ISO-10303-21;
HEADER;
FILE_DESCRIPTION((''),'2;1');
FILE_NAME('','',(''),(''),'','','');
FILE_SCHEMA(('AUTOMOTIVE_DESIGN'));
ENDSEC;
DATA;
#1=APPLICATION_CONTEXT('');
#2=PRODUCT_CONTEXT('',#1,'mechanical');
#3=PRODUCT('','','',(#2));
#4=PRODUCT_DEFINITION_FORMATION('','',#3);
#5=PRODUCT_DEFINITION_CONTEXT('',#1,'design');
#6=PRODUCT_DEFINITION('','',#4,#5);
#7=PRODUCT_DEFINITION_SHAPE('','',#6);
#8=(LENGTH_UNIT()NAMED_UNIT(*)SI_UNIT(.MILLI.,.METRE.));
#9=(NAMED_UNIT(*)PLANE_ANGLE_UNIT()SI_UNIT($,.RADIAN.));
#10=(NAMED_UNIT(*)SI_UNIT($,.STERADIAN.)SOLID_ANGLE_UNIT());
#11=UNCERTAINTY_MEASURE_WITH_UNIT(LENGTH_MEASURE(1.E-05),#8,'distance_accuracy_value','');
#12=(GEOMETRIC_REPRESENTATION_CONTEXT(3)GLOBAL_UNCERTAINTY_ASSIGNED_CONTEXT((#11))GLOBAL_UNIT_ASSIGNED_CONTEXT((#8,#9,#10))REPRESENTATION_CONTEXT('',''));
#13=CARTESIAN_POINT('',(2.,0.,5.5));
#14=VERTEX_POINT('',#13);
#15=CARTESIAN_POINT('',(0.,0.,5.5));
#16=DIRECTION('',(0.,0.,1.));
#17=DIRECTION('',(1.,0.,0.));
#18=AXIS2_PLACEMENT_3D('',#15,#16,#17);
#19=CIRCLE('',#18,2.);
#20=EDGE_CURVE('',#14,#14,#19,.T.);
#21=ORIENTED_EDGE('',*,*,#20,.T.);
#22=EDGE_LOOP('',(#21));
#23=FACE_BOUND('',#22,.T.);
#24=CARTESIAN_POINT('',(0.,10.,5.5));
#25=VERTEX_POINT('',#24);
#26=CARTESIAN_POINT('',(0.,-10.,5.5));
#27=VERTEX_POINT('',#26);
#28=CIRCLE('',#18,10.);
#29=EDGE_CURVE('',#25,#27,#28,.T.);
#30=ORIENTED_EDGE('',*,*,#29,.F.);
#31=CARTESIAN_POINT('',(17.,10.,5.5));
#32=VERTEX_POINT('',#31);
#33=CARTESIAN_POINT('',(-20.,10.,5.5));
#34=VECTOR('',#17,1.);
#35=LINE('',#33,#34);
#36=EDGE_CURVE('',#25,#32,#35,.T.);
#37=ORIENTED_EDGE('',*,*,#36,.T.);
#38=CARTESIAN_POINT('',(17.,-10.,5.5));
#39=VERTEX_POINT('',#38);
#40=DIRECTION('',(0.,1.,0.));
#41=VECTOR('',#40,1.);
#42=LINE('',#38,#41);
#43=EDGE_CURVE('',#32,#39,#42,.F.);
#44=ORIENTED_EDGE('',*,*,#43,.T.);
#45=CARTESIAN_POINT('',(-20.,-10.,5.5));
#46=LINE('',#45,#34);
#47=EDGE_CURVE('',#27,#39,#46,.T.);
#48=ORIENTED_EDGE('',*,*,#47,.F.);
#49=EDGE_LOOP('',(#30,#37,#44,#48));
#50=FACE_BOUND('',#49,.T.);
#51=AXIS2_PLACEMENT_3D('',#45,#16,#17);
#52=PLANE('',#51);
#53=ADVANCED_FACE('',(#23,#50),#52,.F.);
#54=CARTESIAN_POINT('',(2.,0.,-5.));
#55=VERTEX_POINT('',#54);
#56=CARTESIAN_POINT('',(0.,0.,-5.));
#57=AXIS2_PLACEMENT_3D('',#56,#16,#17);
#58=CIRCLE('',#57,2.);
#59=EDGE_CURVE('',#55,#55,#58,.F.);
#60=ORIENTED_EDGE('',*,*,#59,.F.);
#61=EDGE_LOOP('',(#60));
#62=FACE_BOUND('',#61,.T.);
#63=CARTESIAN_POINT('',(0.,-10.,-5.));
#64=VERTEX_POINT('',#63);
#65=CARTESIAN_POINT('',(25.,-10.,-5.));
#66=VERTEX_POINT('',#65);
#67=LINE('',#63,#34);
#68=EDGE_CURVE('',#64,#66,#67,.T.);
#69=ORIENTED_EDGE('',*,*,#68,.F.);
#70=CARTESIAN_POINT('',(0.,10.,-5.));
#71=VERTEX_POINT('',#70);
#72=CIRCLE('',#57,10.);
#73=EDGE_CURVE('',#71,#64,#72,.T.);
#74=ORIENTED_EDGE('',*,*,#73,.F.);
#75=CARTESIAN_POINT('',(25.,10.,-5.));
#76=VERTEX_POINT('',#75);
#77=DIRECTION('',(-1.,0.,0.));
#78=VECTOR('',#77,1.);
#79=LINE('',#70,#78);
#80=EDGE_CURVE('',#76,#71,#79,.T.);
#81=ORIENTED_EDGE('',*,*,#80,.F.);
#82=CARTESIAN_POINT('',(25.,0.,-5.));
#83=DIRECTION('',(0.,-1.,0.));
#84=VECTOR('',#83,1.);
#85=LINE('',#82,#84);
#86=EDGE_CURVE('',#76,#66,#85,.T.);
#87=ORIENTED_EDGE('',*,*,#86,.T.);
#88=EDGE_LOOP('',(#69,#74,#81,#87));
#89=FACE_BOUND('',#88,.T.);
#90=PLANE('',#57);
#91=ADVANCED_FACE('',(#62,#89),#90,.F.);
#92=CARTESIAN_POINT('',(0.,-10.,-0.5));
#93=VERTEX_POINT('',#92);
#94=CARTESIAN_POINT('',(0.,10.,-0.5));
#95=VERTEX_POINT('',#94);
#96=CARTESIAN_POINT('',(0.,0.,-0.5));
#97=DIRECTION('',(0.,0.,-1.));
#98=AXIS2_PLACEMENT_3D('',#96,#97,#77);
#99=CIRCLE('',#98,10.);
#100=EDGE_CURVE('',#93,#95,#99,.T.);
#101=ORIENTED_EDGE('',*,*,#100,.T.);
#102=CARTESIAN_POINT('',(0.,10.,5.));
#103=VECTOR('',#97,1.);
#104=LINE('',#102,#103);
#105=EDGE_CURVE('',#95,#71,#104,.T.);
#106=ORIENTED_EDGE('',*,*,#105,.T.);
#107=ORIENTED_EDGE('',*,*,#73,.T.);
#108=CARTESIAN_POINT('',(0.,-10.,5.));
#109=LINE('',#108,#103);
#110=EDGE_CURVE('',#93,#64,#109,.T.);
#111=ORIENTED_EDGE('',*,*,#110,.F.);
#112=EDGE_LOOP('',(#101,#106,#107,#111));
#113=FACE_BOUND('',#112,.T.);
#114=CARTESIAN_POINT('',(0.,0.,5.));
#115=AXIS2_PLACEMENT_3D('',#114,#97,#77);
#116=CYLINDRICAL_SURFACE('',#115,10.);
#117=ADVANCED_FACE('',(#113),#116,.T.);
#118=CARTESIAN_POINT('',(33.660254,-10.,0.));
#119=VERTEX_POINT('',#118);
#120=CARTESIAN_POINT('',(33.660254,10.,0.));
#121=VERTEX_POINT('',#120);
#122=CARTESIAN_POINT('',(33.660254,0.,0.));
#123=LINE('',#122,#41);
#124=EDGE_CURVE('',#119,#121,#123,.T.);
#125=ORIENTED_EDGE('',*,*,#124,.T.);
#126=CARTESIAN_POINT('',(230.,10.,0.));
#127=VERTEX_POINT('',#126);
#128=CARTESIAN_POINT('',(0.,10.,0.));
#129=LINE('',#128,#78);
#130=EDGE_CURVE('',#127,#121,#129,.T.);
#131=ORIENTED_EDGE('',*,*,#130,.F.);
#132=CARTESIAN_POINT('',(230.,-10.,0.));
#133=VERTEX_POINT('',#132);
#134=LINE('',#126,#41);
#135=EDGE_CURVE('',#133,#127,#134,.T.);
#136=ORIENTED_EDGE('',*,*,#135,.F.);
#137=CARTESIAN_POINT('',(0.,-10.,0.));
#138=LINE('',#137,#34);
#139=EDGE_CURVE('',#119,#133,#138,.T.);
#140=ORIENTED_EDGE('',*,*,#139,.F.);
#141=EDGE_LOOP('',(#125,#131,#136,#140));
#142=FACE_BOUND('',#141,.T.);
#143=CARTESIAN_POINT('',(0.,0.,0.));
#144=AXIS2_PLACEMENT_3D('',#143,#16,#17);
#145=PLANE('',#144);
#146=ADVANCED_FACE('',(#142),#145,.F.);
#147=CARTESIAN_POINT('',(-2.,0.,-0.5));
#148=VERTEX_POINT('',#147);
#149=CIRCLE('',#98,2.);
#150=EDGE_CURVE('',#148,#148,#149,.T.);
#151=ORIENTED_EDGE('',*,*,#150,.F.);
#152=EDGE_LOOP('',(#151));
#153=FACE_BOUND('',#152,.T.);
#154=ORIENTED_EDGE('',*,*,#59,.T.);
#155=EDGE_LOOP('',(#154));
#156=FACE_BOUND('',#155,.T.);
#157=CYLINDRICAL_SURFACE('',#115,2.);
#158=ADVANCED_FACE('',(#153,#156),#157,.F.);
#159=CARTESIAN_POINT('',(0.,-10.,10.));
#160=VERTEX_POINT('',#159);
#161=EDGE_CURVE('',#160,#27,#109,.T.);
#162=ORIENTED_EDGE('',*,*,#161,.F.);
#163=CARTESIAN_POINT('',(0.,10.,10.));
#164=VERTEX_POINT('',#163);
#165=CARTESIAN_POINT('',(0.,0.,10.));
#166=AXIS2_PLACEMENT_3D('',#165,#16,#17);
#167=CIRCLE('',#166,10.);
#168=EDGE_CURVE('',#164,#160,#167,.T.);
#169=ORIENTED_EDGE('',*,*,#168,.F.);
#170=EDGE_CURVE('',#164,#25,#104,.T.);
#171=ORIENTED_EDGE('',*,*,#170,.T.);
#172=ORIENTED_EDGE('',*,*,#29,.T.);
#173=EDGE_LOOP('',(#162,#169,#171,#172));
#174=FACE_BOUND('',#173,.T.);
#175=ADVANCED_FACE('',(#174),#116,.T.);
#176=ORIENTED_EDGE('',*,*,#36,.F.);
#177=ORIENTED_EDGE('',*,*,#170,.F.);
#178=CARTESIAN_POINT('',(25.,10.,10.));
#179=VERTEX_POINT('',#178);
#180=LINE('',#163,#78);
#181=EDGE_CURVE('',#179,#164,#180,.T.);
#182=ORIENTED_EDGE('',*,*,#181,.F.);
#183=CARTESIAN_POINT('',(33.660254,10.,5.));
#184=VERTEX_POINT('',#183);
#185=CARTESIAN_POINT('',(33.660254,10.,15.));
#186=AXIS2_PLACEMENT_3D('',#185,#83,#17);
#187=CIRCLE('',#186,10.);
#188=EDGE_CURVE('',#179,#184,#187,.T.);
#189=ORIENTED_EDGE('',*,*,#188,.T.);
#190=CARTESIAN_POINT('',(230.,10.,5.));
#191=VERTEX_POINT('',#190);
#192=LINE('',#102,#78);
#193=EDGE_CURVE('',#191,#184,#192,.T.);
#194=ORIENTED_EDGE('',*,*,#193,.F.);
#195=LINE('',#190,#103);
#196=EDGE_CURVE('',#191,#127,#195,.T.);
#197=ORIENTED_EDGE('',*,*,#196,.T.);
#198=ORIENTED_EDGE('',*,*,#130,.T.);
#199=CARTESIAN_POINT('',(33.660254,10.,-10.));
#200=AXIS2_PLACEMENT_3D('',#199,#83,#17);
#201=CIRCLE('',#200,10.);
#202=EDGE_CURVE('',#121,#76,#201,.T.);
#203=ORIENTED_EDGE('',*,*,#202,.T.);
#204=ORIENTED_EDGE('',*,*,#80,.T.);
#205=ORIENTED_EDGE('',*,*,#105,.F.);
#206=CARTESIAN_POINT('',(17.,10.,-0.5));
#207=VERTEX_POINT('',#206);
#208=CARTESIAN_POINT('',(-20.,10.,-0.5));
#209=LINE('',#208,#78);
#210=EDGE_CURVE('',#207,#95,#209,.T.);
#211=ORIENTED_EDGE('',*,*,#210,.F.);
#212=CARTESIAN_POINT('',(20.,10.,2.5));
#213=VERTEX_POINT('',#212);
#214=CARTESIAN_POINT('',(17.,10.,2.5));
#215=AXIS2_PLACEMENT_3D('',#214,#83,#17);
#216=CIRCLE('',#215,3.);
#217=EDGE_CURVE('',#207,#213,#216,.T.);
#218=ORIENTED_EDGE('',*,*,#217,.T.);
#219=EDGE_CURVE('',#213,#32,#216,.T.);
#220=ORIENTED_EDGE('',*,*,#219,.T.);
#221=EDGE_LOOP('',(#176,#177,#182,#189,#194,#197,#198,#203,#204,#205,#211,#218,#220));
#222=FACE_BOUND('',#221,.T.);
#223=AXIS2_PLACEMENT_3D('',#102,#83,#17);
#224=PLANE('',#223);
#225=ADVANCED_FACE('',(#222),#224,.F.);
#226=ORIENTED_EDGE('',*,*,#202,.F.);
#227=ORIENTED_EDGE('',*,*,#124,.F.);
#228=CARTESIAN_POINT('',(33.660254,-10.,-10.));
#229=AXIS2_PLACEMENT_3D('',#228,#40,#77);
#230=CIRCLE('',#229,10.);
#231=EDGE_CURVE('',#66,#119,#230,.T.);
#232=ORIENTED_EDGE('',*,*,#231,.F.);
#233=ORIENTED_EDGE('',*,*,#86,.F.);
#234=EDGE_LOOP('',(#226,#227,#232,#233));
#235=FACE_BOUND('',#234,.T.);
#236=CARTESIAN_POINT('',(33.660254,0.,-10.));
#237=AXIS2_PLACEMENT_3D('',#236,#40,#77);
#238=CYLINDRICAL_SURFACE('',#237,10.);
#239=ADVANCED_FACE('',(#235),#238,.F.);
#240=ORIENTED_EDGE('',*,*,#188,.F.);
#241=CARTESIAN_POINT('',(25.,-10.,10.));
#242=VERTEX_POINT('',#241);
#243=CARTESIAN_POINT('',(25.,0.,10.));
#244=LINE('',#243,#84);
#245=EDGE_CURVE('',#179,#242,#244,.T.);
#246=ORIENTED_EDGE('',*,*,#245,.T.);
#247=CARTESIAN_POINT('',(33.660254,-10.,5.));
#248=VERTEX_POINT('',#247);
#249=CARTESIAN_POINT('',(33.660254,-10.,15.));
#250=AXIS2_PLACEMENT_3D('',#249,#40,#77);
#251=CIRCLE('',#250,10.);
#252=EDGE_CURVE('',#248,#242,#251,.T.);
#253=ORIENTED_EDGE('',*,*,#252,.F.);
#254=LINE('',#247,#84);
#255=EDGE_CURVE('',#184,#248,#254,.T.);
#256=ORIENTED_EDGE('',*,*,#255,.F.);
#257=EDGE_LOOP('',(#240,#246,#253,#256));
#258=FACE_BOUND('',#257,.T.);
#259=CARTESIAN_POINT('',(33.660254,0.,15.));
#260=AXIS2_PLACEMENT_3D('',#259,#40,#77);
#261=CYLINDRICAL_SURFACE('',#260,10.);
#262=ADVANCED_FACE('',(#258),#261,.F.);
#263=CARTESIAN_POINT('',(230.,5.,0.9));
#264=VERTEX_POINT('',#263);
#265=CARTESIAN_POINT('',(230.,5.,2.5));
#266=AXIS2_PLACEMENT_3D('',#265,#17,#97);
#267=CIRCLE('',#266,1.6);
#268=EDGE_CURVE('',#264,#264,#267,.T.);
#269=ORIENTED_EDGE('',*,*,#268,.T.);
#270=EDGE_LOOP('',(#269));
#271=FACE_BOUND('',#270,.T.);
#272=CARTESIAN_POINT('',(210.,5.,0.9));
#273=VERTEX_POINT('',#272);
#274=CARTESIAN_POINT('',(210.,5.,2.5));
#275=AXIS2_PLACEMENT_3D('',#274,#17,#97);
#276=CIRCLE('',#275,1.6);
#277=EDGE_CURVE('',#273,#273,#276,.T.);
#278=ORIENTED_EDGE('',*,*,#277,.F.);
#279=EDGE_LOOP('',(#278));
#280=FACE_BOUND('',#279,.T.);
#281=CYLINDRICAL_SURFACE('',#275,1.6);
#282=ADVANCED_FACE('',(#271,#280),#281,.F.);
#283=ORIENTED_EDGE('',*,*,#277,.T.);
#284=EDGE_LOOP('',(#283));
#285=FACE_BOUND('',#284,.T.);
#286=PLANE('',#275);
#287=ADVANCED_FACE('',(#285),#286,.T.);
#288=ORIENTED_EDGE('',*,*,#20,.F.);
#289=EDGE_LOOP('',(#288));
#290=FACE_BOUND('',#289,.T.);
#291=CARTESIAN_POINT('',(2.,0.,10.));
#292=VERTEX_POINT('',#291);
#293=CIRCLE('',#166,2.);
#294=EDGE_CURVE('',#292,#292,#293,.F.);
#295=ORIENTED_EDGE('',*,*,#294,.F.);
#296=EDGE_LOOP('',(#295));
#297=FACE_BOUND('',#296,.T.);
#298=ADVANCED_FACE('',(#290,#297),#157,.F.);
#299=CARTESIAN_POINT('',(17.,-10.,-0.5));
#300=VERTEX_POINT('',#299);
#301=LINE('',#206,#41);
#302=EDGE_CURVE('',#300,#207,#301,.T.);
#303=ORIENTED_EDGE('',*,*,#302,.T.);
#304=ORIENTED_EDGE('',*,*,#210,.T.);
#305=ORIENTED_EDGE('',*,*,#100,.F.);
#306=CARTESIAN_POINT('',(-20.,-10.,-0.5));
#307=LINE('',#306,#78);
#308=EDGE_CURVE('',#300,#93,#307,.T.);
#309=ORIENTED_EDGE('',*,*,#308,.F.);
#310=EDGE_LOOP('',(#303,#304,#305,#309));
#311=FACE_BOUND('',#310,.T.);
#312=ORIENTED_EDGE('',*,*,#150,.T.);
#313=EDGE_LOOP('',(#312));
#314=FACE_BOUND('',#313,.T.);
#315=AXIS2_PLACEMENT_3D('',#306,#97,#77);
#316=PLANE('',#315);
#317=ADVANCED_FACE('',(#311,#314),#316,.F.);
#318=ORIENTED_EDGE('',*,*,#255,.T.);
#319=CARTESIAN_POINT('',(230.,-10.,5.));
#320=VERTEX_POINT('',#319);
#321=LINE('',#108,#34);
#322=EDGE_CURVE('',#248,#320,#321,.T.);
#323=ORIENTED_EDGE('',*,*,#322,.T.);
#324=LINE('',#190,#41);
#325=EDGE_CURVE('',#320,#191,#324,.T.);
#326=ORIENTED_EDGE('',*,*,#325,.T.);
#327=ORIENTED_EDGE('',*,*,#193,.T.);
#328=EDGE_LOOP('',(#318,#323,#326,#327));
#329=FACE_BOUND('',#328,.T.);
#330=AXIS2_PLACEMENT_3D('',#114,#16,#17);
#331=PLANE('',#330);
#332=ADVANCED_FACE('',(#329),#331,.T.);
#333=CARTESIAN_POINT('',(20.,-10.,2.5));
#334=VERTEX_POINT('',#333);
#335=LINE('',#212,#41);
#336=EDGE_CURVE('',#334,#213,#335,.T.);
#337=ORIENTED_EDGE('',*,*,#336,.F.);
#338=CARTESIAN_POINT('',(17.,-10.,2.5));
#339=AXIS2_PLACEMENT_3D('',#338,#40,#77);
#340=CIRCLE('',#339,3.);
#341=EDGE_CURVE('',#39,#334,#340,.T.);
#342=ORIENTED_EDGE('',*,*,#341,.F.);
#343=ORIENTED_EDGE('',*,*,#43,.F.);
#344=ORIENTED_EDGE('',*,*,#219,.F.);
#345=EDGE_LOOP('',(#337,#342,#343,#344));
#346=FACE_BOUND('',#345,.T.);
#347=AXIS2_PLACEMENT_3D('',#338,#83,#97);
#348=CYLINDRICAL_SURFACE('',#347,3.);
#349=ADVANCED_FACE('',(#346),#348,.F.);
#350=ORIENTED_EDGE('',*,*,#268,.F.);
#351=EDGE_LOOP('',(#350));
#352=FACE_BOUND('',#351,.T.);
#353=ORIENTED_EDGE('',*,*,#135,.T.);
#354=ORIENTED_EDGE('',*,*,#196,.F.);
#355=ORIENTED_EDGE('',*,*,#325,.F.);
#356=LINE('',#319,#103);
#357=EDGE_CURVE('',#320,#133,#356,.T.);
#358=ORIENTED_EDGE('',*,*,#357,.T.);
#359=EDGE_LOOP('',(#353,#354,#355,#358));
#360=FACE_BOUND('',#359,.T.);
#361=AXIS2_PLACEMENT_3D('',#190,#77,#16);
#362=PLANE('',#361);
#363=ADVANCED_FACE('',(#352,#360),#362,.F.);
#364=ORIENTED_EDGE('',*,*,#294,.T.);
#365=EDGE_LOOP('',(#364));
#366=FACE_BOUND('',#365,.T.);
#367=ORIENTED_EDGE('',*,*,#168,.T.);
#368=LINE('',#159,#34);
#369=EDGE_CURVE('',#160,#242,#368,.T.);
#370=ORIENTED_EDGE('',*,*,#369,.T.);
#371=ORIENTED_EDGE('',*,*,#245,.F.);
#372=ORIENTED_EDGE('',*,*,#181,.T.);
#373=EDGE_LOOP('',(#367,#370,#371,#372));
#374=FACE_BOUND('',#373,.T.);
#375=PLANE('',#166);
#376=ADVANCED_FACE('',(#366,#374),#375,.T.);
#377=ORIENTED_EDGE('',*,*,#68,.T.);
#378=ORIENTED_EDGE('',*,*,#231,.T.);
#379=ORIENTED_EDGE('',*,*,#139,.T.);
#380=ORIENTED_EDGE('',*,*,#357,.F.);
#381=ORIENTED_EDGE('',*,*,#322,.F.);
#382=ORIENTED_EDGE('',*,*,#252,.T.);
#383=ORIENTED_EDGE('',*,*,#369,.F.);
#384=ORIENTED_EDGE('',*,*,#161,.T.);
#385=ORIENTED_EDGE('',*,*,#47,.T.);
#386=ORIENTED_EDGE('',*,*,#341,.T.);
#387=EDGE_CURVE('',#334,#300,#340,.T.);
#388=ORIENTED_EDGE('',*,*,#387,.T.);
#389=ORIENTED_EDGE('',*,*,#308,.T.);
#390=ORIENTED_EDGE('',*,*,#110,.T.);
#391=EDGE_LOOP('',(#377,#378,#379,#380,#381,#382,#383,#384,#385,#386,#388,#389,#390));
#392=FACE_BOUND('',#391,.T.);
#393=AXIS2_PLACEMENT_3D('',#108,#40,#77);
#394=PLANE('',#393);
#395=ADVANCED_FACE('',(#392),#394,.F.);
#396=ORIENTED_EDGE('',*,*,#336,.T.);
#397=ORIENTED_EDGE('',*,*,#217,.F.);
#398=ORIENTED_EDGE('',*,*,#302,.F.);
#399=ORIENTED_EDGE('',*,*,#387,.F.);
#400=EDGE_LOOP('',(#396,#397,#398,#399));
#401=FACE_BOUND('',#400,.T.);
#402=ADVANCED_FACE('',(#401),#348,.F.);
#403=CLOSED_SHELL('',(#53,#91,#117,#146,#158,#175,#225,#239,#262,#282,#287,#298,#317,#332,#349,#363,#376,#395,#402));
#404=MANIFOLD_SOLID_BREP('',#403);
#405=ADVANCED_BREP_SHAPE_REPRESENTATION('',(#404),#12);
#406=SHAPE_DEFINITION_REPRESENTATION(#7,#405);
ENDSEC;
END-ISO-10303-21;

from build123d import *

# Parameters (mm, degrees)
SKETCH1_R                = 2
BOSS_EXTRUDE1_DEPTH      = 5
BOSS_EXTRUDE2_DEPTH      = 5
BOSS_EXTRUDE2_DEPTH_BACK = 10
SKETCH2_R                = 2
SKETCH4_W                = 40
SKETCH4_H                = 6
CUT_EXTRUDE1_DEPTH       = 232.084400166
FILLET1_R                = 10
FILLET2_R                = 3
SKETCH5_R                = 1.6
CUT_EXTRUDE2_DEPTH       = 20


# Some blends are built 0.0001 mm under size
with BuildPart() as part:
    # Sketch1 → Boss-Extrude1 (new body)
    with BuildSketch(Plane.XY):
        with BuildLine():
            Line((0, 10), (230, 10))
            Line((230, 10), (230, -10))
            Line((230, -10), (0, -10))
            ThreePointArc((0, -10), (-10, 0), (0, 10))
        make_face()
        Circle(SKETCH1_R, mode=Mode.SUBTRACT)
    extrude(amount=BOSS_EXTRUDE1_DEPTH)

    # Sketch2 → Boss-Extrude2 (add, two sides: drawn at the far end of the back side and taken through both)
    with BuildSketch(Plane.XY.offset(5).offset(-BOSS_EXTRUDE2_DEPTH_BACK)):
        with BuildLine():
            Line((25, -10), (25, 10))
            Line((25, 10), (0, 10))
            ThreePointArc((0, 10), (-10, 0), (0, -10))
            Line((0, -10), (25, -10))
        make_face()
        Circle(SKETCH2_R, mode=Mode.SUBTRACT)
    extrude(amount=BOSS_EXTRUDE2_DEPTH + BOSS_EXTRUDE2_DEPTH_BACK)

    # Sketch4 → Cut-Extrude1 (cut, through all)
    with BuildSketch(Plane(origin=(0, 10, 0), x_dir=(1, 0, 0), z_dir=(0, 1, 0))):
        with Locations((0, -2.5)):
            Rectangle(SKETCH4_W, SKETCH4_H)
    extrude(amount=-CUT_EXTRUDE1_DEPTH, mode=Mode.SUBTRACT)

    # Fillet1
    # the kernel refuses this fillet: 10 mm, written as the material it adds along each edge
    with BuildSketch(Plane(origin=(25, -10, 5), x_dir=(1, 0, 0), z_dir=(0, 1, 0))) as fillet1_piece_1:
        with BuildLine():
            CenterArc((8.660254038, -10), FILLET1_R, 90, 60)
            Line((0, -5), (-0.173205081, -4.9))
            ThreePointArc((-0.173205081, -4.9), (-0.2, -2.5), (-0.2, 0))
            Line((-0.2, 0), (0, 0.2))
            Line((0, 0.2), (8.660254038, 0.2))
            Line((8.660254038, 0.2), (8.660254038, 0))
        make_face()
    extrude(amount=20)
    with BuildSketch(Plane(origin=(25, -10, 0), x_dir=(0, 0, -1), z_dir=(0, 1, 0))) as fillet1_piece_2:
        with BuildLine():
            CenterArc((10, -8.660254038), FILLET1_R, 120, 60)
            Line((0, -8.660254038), (-0.2, -8.660254038))
            Line((-0.2, -8.660254038), (-0.2, 0))
            Line((-0.2, 0), (0, 0.2))
            ThreePointArc((0, 0.2), (2.5, 0.2), (4.9, 0.173205081))
            Line((4.9, 0.173205081), (5, 0))
        make_face()
    extrude(amount=20)

    # Fillet2
    fillet2_edges = [part.edges().sort_by_distance(p)[0] for p in [
        (20, 0, -0.5),
        (20, 0, 5.5),
    ]]
    fillet(fillet2_edges, radius=FILLET2_R - 0.0001)  # a hair under: the kernel refuses the full size

    # Sketch5 → Cut-Extrude2 (cut)
    with BuildSketch(Plane(origin=(230, 0, 0), x_dir=(0, 0, -1), z_dir=(1, 0, 0))):
        with Locations((-2.5, 5)):
            Circle(SKETCH5_R)
    extrude(amount=-CUT_EXTRUDE2_DEPTH, mode=Mode.SUBTRACT)


solid = part.part
